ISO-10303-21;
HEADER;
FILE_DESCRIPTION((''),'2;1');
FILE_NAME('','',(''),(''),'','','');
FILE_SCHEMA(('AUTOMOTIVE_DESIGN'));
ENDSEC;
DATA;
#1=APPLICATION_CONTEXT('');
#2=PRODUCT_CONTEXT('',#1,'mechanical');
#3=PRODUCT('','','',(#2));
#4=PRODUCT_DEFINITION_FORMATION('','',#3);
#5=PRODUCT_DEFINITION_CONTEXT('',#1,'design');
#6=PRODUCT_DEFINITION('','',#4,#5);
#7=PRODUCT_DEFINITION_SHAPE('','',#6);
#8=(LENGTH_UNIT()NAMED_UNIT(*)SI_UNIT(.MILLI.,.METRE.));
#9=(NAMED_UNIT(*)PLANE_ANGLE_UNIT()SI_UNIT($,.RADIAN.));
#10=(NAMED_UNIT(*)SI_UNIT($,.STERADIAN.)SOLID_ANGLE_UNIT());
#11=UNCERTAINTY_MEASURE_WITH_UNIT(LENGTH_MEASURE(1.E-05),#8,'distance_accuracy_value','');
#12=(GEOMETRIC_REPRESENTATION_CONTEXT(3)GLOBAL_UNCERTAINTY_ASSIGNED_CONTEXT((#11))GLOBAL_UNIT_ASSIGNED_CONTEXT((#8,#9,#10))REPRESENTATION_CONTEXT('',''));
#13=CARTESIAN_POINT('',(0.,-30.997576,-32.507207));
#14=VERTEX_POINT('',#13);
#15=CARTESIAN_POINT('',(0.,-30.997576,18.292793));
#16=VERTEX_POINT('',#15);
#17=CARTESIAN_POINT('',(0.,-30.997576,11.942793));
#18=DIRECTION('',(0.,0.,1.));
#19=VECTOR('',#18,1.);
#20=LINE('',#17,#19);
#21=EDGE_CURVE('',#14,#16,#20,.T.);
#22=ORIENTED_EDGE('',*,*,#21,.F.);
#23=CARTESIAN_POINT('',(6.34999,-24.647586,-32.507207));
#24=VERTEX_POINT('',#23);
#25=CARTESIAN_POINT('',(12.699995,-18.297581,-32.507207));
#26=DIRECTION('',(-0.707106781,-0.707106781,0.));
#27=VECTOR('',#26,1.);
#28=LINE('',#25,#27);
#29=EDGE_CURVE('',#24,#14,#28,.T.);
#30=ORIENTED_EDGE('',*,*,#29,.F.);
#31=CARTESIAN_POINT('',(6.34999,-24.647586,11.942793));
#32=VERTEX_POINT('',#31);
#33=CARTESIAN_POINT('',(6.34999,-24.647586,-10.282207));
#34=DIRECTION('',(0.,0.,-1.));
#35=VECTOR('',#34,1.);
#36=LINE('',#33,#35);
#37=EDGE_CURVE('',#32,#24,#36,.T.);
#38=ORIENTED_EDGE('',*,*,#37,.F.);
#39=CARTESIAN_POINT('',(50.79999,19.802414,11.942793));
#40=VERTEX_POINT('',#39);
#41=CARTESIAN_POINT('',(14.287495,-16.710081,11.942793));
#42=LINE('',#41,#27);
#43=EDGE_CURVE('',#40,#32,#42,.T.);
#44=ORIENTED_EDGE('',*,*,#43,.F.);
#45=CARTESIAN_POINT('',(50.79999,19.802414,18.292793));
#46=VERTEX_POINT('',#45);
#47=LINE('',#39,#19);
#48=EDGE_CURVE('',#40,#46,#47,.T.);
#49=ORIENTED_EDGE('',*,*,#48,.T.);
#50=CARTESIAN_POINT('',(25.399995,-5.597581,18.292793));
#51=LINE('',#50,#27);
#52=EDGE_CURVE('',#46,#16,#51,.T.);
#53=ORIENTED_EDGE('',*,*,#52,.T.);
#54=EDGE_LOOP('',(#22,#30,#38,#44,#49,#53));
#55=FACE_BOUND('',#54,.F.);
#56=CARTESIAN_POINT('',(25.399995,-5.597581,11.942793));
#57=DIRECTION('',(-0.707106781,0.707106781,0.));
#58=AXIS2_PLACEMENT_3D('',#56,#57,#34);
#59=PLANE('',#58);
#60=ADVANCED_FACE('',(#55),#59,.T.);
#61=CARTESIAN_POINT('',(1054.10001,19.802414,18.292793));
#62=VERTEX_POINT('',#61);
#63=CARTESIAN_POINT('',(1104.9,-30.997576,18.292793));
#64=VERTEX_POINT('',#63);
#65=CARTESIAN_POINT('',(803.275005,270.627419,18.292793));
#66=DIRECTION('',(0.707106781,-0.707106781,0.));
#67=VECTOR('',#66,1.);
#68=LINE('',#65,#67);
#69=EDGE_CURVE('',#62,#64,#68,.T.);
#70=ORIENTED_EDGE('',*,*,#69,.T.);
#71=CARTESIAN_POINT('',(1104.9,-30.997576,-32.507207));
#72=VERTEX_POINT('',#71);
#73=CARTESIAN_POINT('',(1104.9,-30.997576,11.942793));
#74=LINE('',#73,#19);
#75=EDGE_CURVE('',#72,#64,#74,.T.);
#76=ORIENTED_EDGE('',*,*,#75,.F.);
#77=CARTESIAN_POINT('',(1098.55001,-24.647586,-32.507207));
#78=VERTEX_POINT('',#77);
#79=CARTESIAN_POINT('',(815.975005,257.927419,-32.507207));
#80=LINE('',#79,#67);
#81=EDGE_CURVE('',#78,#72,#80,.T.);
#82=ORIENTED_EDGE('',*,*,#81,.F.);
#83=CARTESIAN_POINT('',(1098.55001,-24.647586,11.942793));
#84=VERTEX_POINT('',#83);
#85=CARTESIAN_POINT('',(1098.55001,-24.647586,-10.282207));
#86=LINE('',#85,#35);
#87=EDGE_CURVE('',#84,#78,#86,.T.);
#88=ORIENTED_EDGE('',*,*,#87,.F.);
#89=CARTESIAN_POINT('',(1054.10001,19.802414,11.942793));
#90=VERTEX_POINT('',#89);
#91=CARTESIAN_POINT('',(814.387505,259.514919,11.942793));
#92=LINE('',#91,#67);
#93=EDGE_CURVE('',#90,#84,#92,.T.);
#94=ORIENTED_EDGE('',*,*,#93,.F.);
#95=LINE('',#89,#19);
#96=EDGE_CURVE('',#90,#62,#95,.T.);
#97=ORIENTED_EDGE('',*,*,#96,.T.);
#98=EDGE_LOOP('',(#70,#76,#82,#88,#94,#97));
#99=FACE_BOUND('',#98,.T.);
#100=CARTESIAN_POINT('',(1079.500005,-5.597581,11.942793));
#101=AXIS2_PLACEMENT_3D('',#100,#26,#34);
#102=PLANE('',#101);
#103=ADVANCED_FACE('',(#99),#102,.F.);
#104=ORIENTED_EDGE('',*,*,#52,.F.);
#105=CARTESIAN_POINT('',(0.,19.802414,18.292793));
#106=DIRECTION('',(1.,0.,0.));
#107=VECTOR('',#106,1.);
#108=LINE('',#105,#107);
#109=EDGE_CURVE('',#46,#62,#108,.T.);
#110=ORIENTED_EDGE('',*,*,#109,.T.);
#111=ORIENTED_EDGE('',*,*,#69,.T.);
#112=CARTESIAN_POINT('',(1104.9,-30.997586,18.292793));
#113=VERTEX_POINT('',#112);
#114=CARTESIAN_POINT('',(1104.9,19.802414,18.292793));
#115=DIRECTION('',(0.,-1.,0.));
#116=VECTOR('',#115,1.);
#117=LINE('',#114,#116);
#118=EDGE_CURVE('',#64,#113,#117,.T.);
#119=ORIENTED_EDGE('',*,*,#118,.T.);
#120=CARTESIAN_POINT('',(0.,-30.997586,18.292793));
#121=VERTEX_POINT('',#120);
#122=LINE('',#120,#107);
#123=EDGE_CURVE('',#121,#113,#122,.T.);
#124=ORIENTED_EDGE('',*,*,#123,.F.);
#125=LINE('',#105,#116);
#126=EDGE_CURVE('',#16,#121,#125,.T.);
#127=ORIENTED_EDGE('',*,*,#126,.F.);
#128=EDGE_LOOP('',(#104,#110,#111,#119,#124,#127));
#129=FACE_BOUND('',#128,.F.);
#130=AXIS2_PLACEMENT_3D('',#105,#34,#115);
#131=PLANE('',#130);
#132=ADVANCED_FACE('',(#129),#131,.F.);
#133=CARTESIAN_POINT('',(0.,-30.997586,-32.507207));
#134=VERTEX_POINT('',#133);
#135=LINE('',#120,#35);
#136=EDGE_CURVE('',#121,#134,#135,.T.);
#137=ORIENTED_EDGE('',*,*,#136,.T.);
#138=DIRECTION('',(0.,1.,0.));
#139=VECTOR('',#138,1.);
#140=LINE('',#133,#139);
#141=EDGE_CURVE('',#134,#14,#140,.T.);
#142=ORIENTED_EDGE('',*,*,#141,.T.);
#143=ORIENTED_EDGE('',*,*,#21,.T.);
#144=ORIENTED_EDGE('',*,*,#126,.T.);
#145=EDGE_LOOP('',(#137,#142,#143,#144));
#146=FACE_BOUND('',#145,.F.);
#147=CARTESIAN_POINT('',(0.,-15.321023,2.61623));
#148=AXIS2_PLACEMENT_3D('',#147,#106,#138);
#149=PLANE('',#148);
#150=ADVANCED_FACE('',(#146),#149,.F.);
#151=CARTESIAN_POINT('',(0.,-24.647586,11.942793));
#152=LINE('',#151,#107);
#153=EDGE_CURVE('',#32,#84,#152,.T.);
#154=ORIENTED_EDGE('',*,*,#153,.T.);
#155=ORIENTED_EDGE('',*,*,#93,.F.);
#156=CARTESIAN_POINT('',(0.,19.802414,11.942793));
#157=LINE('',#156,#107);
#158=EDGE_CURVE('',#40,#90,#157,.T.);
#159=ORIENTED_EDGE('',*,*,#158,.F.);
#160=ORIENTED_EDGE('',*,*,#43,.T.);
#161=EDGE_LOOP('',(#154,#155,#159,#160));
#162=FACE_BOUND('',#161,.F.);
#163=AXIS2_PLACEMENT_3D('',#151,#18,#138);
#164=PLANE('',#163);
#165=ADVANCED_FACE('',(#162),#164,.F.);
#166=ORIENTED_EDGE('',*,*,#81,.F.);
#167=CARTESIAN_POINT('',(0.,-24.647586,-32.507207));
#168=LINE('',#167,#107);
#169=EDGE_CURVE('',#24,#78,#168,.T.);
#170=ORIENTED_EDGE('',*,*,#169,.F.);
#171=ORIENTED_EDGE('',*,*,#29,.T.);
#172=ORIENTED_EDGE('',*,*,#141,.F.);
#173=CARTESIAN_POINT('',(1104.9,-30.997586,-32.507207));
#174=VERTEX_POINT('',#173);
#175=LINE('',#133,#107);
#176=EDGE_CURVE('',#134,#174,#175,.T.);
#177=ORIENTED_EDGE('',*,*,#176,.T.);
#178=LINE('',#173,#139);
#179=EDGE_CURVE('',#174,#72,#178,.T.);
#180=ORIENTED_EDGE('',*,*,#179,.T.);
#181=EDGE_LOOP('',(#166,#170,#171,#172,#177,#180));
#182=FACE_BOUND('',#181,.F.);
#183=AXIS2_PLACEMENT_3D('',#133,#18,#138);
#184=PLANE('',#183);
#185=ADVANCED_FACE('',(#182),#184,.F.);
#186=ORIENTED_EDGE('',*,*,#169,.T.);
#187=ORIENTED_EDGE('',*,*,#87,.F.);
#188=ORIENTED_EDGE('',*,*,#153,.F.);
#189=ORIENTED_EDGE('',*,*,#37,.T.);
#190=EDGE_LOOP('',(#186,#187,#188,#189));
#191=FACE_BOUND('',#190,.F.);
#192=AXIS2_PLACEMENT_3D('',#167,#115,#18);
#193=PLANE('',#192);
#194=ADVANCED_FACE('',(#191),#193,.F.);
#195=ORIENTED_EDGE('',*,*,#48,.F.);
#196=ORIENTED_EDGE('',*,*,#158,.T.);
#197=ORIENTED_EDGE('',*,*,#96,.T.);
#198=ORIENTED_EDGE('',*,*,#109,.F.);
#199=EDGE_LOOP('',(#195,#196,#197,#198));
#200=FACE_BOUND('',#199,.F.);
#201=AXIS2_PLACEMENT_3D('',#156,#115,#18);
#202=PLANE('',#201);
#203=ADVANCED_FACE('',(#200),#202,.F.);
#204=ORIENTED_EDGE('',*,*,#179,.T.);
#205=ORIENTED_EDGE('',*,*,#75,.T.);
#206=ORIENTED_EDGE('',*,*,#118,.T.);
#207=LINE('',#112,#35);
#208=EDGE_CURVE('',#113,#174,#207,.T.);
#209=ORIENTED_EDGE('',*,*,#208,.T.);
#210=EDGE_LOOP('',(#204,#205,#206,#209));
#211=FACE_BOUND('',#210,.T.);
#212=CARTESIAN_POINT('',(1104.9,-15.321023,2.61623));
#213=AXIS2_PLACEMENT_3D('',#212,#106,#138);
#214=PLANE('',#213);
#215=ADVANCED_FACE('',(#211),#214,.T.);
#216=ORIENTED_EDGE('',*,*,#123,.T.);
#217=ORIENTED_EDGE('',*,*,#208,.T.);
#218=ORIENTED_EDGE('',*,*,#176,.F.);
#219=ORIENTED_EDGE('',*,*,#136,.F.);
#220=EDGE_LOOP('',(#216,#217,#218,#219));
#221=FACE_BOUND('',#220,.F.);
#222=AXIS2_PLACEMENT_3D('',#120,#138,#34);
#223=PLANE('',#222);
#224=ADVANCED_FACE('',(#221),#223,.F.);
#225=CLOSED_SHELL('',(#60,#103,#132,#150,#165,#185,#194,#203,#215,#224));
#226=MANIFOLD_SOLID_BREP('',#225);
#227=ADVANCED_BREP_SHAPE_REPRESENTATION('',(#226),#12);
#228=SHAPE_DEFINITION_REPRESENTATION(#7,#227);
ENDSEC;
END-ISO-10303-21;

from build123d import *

# Parameters (mm, degrees)
F1_DEPTH = 1104.9
F2_SIZE2 = 50.79999
F2_SIZE  = 50.79999


# Not quite as in the source:
# - a fillet or chamfer is up to 0.001 mm smaller than in the source, because OpenCascade refuses the exact size


with BuildPart() as f1:
    # F0 (on Right) → F1 (new body)
    with BuildSketch(Plane.YZ):
        Polygon((-30.9975855052, -32.5072072446), (-24.6475855052, -32.5072072446), (-24.6475855052, 11.9427927554), (19.8024144948, 11.9427927554), (19.8024144948, 18.2927927554), (-30.9975855052, 18.2927927554), align=None)
    extrude(amount=F1_DEPTH)

    # F2 (size 50.8 and 50.8 in the source; OpenCascade refuses exactly that, so slightly less here)
    f2_edges = [f1.edges().sort_by_distance(p)[0] for p in [
        (1104.9, 19.802414, 15.117793),
        (0, 19.802414, 15.117793),
    ]]
    chamfer(f2_edges, length=F2_SIZE, length2=F2_SIZE2)


solid = f1.part
